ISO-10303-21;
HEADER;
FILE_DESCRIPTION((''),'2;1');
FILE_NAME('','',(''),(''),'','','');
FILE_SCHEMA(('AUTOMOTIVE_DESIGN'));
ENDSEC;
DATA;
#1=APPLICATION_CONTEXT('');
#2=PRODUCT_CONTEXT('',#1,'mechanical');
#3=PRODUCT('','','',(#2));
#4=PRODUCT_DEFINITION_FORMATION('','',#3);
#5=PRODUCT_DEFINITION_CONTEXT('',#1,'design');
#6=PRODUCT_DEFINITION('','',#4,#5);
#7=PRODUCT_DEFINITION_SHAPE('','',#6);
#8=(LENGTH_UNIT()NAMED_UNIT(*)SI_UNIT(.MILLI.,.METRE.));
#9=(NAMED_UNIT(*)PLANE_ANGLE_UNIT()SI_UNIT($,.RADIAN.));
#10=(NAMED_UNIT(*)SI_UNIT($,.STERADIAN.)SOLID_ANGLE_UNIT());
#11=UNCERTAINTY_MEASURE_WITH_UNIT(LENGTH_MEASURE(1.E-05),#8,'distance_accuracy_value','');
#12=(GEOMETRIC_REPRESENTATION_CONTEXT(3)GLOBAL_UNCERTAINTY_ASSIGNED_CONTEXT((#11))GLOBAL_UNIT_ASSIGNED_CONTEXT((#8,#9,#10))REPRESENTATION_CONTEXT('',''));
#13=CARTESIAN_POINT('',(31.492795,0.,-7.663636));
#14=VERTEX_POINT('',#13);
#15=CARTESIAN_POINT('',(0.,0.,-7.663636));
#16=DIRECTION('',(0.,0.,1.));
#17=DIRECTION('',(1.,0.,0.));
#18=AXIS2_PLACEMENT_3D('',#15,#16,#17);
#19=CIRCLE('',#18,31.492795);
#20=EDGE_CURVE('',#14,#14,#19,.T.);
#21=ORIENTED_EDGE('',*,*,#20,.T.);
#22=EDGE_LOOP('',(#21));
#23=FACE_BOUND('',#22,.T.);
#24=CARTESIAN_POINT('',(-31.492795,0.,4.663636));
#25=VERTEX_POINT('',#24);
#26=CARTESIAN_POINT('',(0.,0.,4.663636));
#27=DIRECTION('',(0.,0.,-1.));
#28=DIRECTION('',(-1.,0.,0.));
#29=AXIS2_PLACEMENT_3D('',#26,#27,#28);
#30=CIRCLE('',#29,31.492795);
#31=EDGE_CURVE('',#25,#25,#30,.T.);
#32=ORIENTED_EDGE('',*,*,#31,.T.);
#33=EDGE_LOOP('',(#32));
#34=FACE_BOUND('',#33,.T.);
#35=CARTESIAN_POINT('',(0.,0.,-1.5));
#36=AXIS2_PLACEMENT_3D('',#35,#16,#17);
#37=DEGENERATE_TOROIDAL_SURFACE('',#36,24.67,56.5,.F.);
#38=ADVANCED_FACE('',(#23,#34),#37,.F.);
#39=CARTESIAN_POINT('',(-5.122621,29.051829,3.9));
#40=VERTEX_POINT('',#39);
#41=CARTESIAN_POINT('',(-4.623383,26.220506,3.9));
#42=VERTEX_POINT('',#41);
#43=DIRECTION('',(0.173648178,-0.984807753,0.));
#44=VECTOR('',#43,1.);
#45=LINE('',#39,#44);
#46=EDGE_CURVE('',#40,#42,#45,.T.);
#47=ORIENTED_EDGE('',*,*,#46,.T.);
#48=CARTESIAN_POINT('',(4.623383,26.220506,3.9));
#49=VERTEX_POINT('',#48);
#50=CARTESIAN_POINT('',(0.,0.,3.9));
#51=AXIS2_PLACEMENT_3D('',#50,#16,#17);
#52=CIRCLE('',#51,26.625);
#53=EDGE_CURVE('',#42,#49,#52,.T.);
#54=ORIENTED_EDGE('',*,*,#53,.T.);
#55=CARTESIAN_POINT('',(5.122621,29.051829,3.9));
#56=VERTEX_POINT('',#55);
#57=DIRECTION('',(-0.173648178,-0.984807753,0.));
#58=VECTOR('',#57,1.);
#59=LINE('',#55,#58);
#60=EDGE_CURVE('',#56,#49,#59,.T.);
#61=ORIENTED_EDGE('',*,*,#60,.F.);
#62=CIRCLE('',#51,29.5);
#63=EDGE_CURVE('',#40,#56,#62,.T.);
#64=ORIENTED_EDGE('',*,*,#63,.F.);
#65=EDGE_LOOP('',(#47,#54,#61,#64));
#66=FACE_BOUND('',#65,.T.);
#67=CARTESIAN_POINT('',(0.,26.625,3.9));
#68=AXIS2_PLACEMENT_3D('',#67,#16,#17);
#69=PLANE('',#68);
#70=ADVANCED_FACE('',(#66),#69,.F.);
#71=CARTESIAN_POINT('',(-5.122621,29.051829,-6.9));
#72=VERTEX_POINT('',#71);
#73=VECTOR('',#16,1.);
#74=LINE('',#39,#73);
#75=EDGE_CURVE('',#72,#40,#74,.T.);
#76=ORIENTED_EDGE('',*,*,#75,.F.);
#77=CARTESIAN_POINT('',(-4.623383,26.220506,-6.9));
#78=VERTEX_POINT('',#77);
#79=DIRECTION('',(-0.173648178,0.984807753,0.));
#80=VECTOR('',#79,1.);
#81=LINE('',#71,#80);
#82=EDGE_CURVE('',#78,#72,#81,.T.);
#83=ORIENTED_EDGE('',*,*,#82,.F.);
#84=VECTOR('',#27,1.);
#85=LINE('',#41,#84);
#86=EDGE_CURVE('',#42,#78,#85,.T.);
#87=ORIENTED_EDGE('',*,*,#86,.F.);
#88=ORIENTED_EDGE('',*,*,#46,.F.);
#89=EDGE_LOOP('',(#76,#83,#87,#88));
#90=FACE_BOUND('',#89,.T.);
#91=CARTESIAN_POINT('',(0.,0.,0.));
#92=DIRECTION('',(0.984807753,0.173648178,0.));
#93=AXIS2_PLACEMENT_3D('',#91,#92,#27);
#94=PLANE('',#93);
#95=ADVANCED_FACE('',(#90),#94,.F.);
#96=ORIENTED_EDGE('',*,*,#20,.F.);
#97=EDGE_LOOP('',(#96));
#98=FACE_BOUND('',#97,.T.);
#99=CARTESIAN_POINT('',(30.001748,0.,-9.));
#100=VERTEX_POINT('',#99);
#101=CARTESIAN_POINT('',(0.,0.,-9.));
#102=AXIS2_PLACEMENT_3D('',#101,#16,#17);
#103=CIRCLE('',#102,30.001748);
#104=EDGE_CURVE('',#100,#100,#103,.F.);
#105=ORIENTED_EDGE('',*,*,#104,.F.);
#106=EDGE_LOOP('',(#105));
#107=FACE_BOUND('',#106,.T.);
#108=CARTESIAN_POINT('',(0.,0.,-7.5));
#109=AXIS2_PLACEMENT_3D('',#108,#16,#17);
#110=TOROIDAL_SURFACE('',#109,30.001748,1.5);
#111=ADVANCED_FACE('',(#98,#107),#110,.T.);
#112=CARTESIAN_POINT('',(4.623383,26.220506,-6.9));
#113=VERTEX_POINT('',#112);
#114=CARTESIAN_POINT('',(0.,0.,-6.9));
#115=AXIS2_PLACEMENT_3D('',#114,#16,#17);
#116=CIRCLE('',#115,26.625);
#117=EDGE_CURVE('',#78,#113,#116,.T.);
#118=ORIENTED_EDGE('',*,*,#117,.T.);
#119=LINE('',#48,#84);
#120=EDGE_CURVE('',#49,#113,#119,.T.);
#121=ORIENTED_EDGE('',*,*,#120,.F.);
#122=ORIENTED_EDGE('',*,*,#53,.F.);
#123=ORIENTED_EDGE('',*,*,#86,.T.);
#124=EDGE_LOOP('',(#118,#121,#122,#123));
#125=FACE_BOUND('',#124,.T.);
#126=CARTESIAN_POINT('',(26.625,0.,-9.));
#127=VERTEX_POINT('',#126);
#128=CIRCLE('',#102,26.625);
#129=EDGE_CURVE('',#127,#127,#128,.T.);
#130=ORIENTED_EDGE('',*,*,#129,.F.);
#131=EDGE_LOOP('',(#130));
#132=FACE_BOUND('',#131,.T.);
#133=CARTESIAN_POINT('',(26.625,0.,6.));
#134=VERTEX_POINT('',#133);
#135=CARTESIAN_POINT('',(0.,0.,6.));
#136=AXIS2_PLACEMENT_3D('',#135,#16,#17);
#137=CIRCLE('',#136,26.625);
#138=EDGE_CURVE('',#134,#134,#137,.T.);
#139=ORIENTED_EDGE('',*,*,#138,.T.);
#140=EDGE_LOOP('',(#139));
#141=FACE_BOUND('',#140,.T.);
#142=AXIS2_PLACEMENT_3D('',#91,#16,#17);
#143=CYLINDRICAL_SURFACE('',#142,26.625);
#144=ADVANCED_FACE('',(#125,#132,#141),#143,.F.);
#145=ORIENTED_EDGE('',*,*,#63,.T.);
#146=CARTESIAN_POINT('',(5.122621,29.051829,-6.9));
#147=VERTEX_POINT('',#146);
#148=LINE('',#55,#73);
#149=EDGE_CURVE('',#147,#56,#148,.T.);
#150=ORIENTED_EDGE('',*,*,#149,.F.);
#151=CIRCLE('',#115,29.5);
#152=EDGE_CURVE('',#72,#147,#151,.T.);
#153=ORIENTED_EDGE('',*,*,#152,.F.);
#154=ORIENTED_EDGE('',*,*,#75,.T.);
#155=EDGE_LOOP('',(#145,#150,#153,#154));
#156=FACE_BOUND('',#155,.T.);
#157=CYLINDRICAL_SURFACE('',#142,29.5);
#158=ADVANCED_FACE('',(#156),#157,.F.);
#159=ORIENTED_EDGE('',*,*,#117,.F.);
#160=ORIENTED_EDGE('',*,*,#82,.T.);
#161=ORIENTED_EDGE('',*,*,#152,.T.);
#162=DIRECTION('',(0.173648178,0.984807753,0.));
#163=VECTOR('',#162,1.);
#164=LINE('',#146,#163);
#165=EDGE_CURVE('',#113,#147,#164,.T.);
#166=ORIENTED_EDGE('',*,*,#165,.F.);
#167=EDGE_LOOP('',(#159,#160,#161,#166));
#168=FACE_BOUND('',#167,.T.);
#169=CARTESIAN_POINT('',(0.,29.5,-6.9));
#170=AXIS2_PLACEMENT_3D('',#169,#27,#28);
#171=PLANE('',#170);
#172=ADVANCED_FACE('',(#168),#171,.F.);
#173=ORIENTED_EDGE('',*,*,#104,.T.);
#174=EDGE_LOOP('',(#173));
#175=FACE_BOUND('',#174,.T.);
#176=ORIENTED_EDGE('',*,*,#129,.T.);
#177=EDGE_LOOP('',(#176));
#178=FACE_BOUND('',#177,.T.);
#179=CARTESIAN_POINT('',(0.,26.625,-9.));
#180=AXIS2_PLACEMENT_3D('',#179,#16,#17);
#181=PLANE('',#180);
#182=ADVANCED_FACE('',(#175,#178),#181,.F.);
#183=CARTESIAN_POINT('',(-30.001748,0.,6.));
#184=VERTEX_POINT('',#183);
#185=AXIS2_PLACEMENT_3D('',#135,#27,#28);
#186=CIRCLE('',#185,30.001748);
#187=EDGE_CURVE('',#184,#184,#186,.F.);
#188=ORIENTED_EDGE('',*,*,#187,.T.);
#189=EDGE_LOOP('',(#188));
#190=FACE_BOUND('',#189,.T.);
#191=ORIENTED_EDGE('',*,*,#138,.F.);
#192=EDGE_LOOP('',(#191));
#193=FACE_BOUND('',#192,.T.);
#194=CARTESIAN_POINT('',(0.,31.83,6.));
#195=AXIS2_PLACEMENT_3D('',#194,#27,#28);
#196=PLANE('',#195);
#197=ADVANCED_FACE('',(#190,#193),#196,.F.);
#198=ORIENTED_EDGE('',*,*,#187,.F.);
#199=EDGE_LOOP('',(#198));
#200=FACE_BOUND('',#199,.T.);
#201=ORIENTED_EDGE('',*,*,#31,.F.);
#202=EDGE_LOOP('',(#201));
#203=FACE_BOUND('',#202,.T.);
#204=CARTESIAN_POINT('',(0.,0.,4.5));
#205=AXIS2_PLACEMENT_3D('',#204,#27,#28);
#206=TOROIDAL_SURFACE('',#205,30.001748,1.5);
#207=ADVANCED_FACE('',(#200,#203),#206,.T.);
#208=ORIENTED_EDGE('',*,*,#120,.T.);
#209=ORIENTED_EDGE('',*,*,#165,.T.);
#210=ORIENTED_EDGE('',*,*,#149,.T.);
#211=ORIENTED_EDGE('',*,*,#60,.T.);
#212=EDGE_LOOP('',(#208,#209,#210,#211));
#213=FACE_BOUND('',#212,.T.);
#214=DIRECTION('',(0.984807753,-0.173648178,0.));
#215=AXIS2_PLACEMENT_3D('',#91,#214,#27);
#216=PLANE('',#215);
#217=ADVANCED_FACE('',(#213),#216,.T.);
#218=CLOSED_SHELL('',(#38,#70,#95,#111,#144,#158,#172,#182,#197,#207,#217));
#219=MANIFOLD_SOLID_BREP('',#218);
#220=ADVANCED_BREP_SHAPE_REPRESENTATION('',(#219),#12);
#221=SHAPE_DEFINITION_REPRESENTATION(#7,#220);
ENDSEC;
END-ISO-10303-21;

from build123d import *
from build123d.topology import SkipClean

# Parameters (mm, degrees)
FILLET1_R                = 1.5
SKETCH3_W                = 10.8
SKETCH3_H                = 2.875
REVOLVE2_ANGLE           = 10
REVOLVE2_OTHER_WAY_ANGLE = 10


with BuildPart() as part:
    # Sketch1 → Revolve1 (revolve)
    with BuildSketch(Plane(origin=(0, 0, 0), x_dir=(0, 0, -1), z_dir=(1, 0, 0)), mode=Mode.PRIVATE) as revolve1_sk:
        Polygon((-6, 26.625), (-3.9, 26.625), (-3.9, 29.5), (6.9, 29.5), (6.9, 26.625), (9, 26.625), (9, 31.83), (-6, 31.83), align=None)
    revolve(revolve1_sk.sketch.rotate(Axis((0, 0, 0), (0, 0, -1)), 90), axis=Axis((0, 0, 0), (0, 0, -1)))

    # Sketch2 → Cut-Revolve1 (revolve, cut)
    with BuildSketch(Plane(origin=(0, 0, 0), x_dir=(0, 0, -1), z_dir=(1, 0, 0))):
        with BuildLine():
            Line((-6, 31.33), (-6, 34.232904199))
            Line((-6, 34.232904199), (9, 34.232904199))
            Line((9, 34.232904199), (9, 31.33))
            ThreePointArc((9, 31.33), (1.5, 31.83), (-6, 31.33))
        make_face()
    revolve(axis=Axis((0, 0, 0), (0, 0, -1)), mode=Mode.SUBTRACT)

    # Fillet1
    fillet1_edges = [part.edges().sort_by_distance(p)[0] for p in [
        (0, -31.33, -9),
        (0, -31.33, 6),
    ]]
    fillet(fillet1_edges, radius=FILLET1_R)

    # Sketch3 → Revolve2 (revolve)
    with SkipClean():  # the faces are left unmerged after this step: merging them gives an invalid solid
        with BuildSketch(Plane(origin=(0, 0, 0), x_dir=(0, 0, -1), z_dir=(1, 0, 0))):
            with Locations((1.5, 28.0625)):
                Rectangle(SKETCH3_W, SKETCH3_H)
        revolve(axis=Axis((0, 0, 0), (0, 0, -1)), revolution_arc=REVOLVE2_ANGLE)

    # Sketch3 → Revolve2 other way (revolve)
    with SkipClean():  # the faces are left unmerged after this step: merging them gives an invalid solid
        with BuildSketch(Plane(origin=(0, 0, 0), x_dir=(0, 0, -1), z_dir=(1, 0, 0))):
            with Locations((1.5, 28.0625)):
                Rectangle(SKETCH3_W, SKETCH3_H)
        revolve(axis=Axis((0, 0, 0), (0, 0, 1)), revolution_arc=REVOLVE2_OTHER_WAY_ANGLE)
    add(part.part.scale(1), mode=Mode.REPLACE)  # the faces are merged on a copy


solid = part.part
